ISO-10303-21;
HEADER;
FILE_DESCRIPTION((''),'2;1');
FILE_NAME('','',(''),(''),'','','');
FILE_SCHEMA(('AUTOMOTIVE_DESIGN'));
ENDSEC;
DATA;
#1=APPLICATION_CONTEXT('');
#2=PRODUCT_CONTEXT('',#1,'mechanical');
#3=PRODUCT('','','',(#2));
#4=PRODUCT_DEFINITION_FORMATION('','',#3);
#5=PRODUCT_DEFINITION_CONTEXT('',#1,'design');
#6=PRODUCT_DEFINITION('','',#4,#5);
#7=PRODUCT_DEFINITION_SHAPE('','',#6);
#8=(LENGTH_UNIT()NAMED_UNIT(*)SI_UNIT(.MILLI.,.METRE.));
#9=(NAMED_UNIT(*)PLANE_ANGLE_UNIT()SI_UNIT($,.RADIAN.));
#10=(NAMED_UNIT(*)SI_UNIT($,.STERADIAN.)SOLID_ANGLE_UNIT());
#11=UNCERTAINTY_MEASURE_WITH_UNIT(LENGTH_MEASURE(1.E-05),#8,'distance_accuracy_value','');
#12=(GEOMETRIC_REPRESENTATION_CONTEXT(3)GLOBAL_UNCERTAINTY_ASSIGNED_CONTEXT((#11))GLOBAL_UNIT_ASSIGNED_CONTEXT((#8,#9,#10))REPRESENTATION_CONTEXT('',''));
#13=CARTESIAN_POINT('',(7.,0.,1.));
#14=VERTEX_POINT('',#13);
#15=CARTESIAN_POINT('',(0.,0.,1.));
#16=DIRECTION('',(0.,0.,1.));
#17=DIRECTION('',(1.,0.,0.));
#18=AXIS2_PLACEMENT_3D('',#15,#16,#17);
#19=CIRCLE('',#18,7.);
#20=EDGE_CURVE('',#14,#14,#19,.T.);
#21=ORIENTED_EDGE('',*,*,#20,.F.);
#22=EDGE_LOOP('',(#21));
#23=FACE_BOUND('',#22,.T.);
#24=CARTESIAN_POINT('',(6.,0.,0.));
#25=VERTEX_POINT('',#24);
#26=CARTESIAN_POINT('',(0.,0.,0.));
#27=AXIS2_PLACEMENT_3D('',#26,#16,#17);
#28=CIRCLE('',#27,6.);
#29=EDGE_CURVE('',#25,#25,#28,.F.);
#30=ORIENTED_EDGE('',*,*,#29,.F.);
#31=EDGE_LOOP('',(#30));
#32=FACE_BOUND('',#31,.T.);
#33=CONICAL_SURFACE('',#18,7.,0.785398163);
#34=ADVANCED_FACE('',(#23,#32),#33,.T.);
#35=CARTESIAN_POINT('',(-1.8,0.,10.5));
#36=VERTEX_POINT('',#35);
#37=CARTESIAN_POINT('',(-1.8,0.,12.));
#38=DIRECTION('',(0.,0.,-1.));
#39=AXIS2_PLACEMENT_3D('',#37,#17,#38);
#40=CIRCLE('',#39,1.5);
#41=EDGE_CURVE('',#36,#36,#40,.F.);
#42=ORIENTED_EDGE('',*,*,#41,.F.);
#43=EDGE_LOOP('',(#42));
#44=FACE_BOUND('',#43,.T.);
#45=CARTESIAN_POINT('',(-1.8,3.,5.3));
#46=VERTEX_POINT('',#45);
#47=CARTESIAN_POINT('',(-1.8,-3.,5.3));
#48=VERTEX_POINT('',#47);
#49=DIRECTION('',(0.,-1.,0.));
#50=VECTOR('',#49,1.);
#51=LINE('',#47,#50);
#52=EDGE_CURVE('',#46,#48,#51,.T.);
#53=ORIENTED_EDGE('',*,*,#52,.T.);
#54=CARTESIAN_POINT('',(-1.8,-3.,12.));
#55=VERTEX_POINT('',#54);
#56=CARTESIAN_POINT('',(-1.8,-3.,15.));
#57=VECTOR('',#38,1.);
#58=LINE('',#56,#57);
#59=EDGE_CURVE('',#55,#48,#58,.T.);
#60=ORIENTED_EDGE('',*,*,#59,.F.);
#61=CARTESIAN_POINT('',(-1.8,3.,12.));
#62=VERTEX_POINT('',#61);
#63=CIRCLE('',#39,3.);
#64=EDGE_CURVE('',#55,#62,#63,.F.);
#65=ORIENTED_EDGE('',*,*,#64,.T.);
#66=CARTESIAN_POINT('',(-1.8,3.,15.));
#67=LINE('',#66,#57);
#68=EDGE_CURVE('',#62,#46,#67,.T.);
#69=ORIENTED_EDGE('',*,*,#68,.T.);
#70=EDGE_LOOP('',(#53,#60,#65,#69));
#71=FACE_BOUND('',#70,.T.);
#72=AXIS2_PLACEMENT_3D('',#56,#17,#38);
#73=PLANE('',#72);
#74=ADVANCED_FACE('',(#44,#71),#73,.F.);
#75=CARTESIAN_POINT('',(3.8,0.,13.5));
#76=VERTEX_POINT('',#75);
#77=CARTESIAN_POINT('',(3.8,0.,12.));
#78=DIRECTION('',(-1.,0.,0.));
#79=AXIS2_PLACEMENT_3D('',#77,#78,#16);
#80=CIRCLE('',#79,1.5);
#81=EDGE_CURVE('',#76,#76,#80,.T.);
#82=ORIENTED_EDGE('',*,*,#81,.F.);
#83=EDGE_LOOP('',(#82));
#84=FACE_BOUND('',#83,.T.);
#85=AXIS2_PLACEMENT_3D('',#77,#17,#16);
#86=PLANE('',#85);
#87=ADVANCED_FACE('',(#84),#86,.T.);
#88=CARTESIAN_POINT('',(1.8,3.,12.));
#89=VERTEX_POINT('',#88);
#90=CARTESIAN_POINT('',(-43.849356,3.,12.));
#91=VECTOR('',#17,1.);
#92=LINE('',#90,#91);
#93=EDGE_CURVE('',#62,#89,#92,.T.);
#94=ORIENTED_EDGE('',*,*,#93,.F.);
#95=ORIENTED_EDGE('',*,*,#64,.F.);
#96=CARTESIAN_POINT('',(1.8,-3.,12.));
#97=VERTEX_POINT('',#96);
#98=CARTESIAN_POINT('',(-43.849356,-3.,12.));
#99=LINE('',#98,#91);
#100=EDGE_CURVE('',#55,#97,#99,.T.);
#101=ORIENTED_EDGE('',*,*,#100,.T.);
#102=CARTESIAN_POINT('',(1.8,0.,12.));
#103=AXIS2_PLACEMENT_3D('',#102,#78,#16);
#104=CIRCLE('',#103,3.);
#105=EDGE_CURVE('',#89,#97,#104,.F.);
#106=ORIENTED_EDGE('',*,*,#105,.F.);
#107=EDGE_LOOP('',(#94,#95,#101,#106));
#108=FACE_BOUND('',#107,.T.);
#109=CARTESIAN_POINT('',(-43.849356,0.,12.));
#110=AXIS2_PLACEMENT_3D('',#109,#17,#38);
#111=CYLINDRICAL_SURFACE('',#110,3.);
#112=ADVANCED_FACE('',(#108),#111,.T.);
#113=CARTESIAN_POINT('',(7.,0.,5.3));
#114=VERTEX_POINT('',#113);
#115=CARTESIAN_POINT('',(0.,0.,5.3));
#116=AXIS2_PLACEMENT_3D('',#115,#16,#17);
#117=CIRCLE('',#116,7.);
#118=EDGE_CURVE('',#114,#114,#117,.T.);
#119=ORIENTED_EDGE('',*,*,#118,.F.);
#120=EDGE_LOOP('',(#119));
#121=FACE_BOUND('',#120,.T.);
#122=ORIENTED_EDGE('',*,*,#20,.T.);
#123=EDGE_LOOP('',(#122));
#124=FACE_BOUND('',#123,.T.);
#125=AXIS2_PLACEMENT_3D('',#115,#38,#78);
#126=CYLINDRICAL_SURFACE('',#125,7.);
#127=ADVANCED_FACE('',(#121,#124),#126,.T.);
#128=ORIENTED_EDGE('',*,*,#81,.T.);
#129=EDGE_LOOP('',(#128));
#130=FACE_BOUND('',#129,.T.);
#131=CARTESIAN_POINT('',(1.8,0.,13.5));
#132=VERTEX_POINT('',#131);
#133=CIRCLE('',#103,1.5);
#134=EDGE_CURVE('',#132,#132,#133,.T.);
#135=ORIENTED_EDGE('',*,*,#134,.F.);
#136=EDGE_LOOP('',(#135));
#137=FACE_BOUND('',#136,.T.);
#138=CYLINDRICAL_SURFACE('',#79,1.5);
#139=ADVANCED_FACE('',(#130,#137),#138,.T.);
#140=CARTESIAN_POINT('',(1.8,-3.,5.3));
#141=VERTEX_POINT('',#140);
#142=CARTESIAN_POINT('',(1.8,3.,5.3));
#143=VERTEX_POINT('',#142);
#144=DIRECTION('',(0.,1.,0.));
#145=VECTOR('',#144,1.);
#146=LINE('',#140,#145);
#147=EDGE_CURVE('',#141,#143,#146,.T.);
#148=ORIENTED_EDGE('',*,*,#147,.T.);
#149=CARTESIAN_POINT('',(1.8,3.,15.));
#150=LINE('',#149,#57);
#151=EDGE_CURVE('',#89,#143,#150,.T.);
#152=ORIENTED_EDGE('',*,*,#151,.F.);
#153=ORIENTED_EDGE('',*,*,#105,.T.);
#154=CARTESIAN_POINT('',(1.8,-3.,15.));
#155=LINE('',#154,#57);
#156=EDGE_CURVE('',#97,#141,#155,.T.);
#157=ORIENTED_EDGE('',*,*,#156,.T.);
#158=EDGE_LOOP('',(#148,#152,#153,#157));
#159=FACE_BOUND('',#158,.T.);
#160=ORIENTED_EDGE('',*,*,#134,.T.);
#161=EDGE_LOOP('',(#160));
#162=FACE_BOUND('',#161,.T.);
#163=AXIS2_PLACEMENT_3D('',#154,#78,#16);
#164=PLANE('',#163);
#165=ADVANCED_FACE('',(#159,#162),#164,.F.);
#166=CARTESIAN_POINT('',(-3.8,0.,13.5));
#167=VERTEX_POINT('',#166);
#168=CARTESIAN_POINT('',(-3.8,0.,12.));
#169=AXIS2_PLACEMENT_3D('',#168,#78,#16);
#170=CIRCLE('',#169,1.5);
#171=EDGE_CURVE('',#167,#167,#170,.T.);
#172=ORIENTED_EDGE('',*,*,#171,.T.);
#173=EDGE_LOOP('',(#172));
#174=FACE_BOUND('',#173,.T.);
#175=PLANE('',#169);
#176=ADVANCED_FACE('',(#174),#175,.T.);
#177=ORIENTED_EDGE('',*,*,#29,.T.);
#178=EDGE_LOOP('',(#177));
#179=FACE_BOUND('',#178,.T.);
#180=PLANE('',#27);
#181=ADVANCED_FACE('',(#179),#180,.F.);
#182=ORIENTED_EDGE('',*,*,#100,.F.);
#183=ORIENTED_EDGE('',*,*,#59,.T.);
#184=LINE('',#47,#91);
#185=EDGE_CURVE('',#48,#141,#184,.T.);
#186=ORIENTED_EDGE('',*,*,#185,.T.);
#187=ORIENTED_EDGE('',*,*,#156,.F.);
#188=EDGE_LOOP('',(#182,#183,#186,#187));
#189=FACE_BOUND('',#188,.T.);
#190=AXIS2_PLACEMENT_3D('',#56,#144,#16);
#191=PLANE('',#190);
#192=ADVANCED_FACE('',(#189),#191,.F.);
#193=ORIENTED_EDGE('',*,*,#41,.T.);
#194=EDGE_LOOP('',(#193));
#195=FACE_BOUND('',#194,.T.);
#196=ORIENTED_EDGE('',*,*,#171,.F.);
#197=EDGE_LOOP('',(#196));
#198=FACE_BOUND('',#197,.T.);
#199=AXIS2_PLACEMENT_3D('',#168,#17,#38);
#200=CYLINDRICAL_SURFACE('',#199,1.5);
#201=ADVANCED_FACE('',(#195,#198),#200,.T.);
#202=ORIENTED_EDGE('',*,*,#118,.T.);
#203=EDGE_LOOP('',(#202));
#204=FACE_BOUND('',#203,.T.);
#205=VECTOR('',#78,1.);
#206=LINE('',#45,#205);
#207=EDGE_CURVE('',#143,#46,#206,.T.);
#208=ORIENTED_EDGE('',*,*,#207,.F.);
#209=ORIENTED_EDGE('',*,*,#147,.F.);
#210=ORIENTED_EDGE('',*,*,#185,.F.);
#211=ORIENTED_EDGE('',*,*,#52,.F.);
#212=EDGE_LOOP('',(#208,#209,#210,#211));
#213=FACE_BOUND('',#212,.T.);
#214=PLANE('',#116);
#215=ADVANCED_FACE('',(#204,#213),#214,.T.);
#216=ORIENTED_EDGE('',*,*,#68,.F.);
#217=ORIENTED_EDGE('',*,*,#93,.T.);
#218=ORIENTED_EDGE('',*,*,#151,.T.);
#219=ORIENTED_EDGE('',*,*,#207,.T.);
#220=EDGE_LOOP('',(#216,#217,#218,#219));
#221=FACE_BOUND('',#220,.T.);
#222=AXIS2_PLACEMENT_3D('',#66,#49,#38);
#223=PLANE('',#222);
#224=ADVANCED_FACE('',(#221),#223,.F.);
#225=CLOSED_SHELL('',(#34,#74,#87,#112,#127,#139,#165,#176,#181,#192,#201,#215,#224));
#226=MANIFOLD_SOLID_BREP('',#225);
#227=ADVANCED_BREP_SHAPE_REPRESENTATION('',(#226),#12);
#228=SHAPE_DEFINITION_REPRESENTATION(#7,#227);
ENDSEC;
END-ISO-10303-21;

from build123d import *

# Parameters (mm, degrees)
SKETCH_1_R          = 7
EXTRUDE_1_DEPTH     = 5.3
SKETCH_2_W          = 3.6
SKETCH_2_H          = 6
EXTRUDE_2_DEPTH     = 9.7
CUT_EXTRUDE_START   = -3.6
CUT_EXTRUDE_1_DEPTH = 3.6
CHAMFER_1_SIZE      = 1
SKETCH_4_R          = 1.5
EXTRUDE_3_DEPTH     = 2


# Read off the part's stored shape, not the designer's step: 切除-拉伸1
with BuildPart() as part:
    # 草图1 → 凸台-拉伸1 (new body)
    with BuildSketch(Plane.XY):
        Circle(SKETCH_1_R)
    extrude(amount=EXTRUDE_1_DEPTH)

    # 草图2 → 凸台-拉伸2 (add)
    with BuildSketch(Plane.XY.offset(5.3)):
        Rectangle(SKETCH_2_W, SKETCH_2_H)
    extrude(amount=EXTRUDE_2_DEPTH)

    # 切除-拉伸1 outline → 切除-拉伸1 (cut)
    with BuildSketch(Plane.ZY.offset(1.8).offset(CUT_EXTRUDE_START)):
        with BuildLine():
            Line((15, 3), (12, 3))
            ThreePointArc((12, 3), (14.121320344, 2.121320344), (15, 0))
            Line((15, 0), (15, 3))
        make_face()
        with BuildLine():
            Line((15, -3), (15, 0))
            ThreePointArc((15, 0), (14.121320344, -2.121320344), (12, -3))
            Line((12, -3), (15, -3))
        make_face()
    extrude(amount=CUT_EXTRUDE_1_DEPTH, mode=Mode.SUBTRACT)

    # 倒角1
    chamfer_1_edges = [part.edges().sort_by_distance(p)[0] for p in [
        (-7, 0, 0),
    ]]
    chamfer(chamfer_1_edges, length=CHAMFER_1_SIZE)

    # 草图4 → 凸台-拉伸3 (add)
    with BuildSketch(Plane.ZY.offset(1.8)):
        with Locations(Location((12, 0, 0), (0, 0, 180))):
            Circle(SKETCH_4_R)
    extrude_3 = extrude(amount=EXTRUDE_3_DEPTH)

    # 镜向1: 凸台-拉伸3 across plane
    add(extrude_3.mirror(Plane(origin=(0, 0, 0), x_dir=(0, 0, 1), z_dir=(1, 0, 0))))


solid = part.part
